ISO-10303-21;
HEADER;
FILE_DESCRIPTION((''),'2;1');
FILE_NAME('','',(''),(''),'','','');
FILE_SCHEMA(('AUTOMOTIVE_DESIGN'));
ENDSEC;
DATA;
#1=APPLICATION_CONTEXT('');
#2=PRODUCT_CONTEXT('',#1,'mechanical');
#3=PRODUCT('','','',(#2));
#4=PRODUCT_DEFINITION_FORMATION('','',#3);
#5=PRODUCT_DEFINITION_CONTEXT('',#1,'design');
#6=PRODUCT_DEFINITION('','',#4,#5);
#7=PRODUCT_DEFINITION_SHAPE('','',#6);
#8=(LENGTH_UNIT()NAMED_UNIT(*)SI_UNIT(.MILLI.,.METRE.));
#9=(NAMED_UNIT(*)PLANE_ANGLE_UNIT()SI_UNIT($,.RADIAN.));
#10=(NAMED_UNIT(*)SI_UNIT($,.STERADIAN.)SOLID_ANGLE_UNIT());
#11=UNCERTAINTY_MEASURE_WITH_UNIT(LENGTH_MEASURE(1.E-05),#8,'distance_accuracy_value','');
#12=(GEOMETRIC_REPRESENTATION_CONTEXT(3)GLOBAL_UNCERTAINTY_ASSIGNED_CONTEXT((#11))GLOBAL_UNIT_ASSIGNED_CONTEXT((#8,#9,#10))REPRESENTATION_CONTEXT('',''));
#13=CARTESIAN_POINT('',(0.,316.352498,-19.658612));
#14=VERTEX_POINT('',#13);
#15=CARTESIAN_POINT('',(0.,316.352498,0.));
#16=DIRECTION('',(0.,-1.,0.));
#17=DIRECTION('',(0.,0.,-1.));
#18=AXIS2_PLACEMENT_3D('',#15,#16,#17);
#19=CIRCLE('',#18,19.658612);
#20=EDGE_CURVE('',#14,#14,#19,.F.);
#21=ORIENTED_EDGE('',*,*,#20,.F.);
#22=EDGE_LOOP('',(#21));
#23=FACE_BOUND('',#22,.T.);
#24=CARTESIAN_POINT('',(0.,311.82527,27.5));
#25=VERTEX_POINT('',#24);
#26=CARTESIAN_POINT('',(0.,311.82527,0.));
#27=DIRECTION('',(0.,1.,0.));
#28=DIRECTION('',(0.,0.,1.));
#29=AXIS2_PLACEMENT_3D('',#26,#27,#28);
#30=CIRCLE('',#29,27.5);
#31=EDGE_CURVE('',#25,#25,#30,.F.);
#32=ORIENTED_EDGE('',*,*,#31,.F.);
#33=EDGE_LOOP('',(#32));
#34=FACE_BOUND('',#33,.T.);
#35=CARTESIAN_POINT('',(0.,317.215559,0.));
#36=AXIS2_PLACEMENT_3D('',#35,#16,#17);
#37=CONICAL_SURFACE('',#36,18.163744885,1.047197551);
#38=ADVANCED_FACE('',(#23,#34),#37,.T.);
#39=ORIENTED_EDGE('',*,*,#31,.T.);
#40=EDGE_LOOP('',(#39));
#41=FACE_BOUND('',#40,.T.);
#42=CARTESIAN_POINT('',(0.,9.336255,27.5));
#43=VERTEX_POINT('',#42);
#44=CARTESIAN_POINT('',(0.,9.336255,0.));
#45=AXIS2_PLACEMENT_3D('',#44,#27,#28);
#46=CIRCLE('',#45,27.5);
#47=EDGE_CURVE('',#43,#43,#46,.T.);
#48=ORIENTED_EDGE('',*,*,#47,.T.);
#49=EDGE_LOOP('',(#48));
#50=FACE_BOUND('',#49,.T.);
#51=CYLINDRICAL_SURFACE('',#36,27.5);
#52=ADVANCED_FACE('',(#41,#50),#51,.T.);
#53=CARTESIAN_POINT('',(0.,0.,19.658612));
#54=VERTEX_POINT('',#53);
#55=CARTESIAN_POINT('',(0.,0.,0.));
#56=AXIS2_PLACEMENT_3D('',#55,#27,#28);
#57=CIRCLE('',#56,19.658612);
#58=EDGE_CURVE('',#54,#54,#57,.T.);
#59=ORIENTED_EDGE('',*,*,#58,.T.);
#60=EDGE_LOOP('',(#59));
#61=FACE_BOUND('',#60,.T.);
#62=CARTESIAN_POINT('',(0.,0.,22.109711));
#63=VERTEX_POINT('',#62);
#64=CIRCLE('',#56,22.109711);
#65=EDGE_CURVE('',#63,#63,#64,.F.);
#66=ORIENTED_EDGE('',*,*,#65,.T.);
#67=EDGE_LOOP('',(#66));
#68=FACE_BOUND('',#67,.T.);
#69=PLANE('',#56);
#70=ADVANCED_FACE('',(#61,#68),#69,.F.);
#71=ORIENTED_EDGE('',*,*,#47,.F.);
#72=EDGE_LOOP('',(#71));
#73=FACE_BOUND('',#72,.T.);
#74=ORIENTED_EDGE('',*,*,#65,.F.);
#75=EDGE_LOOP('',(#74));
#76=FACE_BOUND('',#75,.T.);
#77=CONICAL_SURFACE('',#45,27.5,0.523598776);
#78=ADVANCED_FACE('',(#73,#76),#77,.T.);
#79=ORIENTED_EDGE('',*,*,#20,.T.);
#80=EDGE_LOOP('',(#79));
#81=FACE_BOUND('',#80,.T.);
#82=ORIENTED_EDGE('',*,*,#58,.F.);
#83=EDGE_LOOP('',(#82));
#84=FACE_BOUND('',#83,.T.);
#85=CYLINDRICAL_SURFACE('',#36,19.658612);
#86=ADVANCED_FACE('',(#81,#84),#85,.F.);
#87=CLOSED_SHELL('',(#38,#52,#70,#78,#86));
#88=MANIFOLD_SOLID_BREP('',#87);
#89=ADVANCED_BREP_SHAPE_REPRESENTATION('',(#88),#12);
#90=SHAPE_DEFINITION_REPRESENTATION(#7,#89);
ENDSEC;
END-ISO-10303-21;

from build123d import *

# Parameters (mm, degrees)
SKETCH1_R           = 27.5
BOSS_EXTRUDE1_DEPTH = 317.215559
SKETCH2_R           = 19.658611568
CUT_EXTRUDE1_DEPTH  = 320.590692718
CHAMFER1_SIZE       = 5.390289
CHAMFER1_SIZE_2     = 9.336255


with BuildPart() as part:
    # Sketch1 → Boss-Extrude1 (new body)
    with BuildSketch(Plane(origin=(0, 0, 0), x_dir=(1, 0, 0), z_dir=(0, 1, 0))):
        with Locations(Location((0, 0, 0), (0, 0, 270))):
            Circle(SKETCH1_R)
    extrude(amount=BOSS_EXTRUDE1_DEPTH)

    # Sketch2 → Cut-Extrude1 (cut, through all)
    with BuildSketch(Plane(origin=(0, 0, 0), x_dir=(1, 0, 0), z_dir=(0, 1, 0))):
        with Locations(Location((0, 0, 0), (0, 0, 270))):
            Circle(SKETCH2_R)
    extrude(amount=CUT_EXTRUDE1_DEPTH, mode=Mode.SUBTRACT)

    # Chamfer1
    # the kernel refuses this chamfer: 9.336255, 5.390289 mm, written as the material it takes off along each edge
    with BuildSketch(Plane(origin=(0, 317.215559, 0), x_dir=(0, 0, 1), z_dir=(-1, 0, 0))) as chamfer1_piece_1:
        Polygon((27.5, -CHAMFER1_SIZE), (27.5 - CHAMFER1_SIZE_2, 0), (27.5, 0), align=None)
    revolve(axis=Axis((0, 317.215559, 0), (0, 1, 0)), mode=Mode.SUBTRACT)
    with BuildSketch(Plane(origin=(0, 0, 0), x_dir=(0, 0, 1), z_dir=(-1, 0, 0))) as chamfer1_piece_2:
        Polygon((27.5, CHAMFER1_SIZE_2), (27.5 - CHAMFER1_SIZE, 0), (27.5, 0), align=None)
    revolve(axis=Axis((0, 0, 0), (0, 1, 0)), mode=Mode.SUBTRACT)


solid = part.part
